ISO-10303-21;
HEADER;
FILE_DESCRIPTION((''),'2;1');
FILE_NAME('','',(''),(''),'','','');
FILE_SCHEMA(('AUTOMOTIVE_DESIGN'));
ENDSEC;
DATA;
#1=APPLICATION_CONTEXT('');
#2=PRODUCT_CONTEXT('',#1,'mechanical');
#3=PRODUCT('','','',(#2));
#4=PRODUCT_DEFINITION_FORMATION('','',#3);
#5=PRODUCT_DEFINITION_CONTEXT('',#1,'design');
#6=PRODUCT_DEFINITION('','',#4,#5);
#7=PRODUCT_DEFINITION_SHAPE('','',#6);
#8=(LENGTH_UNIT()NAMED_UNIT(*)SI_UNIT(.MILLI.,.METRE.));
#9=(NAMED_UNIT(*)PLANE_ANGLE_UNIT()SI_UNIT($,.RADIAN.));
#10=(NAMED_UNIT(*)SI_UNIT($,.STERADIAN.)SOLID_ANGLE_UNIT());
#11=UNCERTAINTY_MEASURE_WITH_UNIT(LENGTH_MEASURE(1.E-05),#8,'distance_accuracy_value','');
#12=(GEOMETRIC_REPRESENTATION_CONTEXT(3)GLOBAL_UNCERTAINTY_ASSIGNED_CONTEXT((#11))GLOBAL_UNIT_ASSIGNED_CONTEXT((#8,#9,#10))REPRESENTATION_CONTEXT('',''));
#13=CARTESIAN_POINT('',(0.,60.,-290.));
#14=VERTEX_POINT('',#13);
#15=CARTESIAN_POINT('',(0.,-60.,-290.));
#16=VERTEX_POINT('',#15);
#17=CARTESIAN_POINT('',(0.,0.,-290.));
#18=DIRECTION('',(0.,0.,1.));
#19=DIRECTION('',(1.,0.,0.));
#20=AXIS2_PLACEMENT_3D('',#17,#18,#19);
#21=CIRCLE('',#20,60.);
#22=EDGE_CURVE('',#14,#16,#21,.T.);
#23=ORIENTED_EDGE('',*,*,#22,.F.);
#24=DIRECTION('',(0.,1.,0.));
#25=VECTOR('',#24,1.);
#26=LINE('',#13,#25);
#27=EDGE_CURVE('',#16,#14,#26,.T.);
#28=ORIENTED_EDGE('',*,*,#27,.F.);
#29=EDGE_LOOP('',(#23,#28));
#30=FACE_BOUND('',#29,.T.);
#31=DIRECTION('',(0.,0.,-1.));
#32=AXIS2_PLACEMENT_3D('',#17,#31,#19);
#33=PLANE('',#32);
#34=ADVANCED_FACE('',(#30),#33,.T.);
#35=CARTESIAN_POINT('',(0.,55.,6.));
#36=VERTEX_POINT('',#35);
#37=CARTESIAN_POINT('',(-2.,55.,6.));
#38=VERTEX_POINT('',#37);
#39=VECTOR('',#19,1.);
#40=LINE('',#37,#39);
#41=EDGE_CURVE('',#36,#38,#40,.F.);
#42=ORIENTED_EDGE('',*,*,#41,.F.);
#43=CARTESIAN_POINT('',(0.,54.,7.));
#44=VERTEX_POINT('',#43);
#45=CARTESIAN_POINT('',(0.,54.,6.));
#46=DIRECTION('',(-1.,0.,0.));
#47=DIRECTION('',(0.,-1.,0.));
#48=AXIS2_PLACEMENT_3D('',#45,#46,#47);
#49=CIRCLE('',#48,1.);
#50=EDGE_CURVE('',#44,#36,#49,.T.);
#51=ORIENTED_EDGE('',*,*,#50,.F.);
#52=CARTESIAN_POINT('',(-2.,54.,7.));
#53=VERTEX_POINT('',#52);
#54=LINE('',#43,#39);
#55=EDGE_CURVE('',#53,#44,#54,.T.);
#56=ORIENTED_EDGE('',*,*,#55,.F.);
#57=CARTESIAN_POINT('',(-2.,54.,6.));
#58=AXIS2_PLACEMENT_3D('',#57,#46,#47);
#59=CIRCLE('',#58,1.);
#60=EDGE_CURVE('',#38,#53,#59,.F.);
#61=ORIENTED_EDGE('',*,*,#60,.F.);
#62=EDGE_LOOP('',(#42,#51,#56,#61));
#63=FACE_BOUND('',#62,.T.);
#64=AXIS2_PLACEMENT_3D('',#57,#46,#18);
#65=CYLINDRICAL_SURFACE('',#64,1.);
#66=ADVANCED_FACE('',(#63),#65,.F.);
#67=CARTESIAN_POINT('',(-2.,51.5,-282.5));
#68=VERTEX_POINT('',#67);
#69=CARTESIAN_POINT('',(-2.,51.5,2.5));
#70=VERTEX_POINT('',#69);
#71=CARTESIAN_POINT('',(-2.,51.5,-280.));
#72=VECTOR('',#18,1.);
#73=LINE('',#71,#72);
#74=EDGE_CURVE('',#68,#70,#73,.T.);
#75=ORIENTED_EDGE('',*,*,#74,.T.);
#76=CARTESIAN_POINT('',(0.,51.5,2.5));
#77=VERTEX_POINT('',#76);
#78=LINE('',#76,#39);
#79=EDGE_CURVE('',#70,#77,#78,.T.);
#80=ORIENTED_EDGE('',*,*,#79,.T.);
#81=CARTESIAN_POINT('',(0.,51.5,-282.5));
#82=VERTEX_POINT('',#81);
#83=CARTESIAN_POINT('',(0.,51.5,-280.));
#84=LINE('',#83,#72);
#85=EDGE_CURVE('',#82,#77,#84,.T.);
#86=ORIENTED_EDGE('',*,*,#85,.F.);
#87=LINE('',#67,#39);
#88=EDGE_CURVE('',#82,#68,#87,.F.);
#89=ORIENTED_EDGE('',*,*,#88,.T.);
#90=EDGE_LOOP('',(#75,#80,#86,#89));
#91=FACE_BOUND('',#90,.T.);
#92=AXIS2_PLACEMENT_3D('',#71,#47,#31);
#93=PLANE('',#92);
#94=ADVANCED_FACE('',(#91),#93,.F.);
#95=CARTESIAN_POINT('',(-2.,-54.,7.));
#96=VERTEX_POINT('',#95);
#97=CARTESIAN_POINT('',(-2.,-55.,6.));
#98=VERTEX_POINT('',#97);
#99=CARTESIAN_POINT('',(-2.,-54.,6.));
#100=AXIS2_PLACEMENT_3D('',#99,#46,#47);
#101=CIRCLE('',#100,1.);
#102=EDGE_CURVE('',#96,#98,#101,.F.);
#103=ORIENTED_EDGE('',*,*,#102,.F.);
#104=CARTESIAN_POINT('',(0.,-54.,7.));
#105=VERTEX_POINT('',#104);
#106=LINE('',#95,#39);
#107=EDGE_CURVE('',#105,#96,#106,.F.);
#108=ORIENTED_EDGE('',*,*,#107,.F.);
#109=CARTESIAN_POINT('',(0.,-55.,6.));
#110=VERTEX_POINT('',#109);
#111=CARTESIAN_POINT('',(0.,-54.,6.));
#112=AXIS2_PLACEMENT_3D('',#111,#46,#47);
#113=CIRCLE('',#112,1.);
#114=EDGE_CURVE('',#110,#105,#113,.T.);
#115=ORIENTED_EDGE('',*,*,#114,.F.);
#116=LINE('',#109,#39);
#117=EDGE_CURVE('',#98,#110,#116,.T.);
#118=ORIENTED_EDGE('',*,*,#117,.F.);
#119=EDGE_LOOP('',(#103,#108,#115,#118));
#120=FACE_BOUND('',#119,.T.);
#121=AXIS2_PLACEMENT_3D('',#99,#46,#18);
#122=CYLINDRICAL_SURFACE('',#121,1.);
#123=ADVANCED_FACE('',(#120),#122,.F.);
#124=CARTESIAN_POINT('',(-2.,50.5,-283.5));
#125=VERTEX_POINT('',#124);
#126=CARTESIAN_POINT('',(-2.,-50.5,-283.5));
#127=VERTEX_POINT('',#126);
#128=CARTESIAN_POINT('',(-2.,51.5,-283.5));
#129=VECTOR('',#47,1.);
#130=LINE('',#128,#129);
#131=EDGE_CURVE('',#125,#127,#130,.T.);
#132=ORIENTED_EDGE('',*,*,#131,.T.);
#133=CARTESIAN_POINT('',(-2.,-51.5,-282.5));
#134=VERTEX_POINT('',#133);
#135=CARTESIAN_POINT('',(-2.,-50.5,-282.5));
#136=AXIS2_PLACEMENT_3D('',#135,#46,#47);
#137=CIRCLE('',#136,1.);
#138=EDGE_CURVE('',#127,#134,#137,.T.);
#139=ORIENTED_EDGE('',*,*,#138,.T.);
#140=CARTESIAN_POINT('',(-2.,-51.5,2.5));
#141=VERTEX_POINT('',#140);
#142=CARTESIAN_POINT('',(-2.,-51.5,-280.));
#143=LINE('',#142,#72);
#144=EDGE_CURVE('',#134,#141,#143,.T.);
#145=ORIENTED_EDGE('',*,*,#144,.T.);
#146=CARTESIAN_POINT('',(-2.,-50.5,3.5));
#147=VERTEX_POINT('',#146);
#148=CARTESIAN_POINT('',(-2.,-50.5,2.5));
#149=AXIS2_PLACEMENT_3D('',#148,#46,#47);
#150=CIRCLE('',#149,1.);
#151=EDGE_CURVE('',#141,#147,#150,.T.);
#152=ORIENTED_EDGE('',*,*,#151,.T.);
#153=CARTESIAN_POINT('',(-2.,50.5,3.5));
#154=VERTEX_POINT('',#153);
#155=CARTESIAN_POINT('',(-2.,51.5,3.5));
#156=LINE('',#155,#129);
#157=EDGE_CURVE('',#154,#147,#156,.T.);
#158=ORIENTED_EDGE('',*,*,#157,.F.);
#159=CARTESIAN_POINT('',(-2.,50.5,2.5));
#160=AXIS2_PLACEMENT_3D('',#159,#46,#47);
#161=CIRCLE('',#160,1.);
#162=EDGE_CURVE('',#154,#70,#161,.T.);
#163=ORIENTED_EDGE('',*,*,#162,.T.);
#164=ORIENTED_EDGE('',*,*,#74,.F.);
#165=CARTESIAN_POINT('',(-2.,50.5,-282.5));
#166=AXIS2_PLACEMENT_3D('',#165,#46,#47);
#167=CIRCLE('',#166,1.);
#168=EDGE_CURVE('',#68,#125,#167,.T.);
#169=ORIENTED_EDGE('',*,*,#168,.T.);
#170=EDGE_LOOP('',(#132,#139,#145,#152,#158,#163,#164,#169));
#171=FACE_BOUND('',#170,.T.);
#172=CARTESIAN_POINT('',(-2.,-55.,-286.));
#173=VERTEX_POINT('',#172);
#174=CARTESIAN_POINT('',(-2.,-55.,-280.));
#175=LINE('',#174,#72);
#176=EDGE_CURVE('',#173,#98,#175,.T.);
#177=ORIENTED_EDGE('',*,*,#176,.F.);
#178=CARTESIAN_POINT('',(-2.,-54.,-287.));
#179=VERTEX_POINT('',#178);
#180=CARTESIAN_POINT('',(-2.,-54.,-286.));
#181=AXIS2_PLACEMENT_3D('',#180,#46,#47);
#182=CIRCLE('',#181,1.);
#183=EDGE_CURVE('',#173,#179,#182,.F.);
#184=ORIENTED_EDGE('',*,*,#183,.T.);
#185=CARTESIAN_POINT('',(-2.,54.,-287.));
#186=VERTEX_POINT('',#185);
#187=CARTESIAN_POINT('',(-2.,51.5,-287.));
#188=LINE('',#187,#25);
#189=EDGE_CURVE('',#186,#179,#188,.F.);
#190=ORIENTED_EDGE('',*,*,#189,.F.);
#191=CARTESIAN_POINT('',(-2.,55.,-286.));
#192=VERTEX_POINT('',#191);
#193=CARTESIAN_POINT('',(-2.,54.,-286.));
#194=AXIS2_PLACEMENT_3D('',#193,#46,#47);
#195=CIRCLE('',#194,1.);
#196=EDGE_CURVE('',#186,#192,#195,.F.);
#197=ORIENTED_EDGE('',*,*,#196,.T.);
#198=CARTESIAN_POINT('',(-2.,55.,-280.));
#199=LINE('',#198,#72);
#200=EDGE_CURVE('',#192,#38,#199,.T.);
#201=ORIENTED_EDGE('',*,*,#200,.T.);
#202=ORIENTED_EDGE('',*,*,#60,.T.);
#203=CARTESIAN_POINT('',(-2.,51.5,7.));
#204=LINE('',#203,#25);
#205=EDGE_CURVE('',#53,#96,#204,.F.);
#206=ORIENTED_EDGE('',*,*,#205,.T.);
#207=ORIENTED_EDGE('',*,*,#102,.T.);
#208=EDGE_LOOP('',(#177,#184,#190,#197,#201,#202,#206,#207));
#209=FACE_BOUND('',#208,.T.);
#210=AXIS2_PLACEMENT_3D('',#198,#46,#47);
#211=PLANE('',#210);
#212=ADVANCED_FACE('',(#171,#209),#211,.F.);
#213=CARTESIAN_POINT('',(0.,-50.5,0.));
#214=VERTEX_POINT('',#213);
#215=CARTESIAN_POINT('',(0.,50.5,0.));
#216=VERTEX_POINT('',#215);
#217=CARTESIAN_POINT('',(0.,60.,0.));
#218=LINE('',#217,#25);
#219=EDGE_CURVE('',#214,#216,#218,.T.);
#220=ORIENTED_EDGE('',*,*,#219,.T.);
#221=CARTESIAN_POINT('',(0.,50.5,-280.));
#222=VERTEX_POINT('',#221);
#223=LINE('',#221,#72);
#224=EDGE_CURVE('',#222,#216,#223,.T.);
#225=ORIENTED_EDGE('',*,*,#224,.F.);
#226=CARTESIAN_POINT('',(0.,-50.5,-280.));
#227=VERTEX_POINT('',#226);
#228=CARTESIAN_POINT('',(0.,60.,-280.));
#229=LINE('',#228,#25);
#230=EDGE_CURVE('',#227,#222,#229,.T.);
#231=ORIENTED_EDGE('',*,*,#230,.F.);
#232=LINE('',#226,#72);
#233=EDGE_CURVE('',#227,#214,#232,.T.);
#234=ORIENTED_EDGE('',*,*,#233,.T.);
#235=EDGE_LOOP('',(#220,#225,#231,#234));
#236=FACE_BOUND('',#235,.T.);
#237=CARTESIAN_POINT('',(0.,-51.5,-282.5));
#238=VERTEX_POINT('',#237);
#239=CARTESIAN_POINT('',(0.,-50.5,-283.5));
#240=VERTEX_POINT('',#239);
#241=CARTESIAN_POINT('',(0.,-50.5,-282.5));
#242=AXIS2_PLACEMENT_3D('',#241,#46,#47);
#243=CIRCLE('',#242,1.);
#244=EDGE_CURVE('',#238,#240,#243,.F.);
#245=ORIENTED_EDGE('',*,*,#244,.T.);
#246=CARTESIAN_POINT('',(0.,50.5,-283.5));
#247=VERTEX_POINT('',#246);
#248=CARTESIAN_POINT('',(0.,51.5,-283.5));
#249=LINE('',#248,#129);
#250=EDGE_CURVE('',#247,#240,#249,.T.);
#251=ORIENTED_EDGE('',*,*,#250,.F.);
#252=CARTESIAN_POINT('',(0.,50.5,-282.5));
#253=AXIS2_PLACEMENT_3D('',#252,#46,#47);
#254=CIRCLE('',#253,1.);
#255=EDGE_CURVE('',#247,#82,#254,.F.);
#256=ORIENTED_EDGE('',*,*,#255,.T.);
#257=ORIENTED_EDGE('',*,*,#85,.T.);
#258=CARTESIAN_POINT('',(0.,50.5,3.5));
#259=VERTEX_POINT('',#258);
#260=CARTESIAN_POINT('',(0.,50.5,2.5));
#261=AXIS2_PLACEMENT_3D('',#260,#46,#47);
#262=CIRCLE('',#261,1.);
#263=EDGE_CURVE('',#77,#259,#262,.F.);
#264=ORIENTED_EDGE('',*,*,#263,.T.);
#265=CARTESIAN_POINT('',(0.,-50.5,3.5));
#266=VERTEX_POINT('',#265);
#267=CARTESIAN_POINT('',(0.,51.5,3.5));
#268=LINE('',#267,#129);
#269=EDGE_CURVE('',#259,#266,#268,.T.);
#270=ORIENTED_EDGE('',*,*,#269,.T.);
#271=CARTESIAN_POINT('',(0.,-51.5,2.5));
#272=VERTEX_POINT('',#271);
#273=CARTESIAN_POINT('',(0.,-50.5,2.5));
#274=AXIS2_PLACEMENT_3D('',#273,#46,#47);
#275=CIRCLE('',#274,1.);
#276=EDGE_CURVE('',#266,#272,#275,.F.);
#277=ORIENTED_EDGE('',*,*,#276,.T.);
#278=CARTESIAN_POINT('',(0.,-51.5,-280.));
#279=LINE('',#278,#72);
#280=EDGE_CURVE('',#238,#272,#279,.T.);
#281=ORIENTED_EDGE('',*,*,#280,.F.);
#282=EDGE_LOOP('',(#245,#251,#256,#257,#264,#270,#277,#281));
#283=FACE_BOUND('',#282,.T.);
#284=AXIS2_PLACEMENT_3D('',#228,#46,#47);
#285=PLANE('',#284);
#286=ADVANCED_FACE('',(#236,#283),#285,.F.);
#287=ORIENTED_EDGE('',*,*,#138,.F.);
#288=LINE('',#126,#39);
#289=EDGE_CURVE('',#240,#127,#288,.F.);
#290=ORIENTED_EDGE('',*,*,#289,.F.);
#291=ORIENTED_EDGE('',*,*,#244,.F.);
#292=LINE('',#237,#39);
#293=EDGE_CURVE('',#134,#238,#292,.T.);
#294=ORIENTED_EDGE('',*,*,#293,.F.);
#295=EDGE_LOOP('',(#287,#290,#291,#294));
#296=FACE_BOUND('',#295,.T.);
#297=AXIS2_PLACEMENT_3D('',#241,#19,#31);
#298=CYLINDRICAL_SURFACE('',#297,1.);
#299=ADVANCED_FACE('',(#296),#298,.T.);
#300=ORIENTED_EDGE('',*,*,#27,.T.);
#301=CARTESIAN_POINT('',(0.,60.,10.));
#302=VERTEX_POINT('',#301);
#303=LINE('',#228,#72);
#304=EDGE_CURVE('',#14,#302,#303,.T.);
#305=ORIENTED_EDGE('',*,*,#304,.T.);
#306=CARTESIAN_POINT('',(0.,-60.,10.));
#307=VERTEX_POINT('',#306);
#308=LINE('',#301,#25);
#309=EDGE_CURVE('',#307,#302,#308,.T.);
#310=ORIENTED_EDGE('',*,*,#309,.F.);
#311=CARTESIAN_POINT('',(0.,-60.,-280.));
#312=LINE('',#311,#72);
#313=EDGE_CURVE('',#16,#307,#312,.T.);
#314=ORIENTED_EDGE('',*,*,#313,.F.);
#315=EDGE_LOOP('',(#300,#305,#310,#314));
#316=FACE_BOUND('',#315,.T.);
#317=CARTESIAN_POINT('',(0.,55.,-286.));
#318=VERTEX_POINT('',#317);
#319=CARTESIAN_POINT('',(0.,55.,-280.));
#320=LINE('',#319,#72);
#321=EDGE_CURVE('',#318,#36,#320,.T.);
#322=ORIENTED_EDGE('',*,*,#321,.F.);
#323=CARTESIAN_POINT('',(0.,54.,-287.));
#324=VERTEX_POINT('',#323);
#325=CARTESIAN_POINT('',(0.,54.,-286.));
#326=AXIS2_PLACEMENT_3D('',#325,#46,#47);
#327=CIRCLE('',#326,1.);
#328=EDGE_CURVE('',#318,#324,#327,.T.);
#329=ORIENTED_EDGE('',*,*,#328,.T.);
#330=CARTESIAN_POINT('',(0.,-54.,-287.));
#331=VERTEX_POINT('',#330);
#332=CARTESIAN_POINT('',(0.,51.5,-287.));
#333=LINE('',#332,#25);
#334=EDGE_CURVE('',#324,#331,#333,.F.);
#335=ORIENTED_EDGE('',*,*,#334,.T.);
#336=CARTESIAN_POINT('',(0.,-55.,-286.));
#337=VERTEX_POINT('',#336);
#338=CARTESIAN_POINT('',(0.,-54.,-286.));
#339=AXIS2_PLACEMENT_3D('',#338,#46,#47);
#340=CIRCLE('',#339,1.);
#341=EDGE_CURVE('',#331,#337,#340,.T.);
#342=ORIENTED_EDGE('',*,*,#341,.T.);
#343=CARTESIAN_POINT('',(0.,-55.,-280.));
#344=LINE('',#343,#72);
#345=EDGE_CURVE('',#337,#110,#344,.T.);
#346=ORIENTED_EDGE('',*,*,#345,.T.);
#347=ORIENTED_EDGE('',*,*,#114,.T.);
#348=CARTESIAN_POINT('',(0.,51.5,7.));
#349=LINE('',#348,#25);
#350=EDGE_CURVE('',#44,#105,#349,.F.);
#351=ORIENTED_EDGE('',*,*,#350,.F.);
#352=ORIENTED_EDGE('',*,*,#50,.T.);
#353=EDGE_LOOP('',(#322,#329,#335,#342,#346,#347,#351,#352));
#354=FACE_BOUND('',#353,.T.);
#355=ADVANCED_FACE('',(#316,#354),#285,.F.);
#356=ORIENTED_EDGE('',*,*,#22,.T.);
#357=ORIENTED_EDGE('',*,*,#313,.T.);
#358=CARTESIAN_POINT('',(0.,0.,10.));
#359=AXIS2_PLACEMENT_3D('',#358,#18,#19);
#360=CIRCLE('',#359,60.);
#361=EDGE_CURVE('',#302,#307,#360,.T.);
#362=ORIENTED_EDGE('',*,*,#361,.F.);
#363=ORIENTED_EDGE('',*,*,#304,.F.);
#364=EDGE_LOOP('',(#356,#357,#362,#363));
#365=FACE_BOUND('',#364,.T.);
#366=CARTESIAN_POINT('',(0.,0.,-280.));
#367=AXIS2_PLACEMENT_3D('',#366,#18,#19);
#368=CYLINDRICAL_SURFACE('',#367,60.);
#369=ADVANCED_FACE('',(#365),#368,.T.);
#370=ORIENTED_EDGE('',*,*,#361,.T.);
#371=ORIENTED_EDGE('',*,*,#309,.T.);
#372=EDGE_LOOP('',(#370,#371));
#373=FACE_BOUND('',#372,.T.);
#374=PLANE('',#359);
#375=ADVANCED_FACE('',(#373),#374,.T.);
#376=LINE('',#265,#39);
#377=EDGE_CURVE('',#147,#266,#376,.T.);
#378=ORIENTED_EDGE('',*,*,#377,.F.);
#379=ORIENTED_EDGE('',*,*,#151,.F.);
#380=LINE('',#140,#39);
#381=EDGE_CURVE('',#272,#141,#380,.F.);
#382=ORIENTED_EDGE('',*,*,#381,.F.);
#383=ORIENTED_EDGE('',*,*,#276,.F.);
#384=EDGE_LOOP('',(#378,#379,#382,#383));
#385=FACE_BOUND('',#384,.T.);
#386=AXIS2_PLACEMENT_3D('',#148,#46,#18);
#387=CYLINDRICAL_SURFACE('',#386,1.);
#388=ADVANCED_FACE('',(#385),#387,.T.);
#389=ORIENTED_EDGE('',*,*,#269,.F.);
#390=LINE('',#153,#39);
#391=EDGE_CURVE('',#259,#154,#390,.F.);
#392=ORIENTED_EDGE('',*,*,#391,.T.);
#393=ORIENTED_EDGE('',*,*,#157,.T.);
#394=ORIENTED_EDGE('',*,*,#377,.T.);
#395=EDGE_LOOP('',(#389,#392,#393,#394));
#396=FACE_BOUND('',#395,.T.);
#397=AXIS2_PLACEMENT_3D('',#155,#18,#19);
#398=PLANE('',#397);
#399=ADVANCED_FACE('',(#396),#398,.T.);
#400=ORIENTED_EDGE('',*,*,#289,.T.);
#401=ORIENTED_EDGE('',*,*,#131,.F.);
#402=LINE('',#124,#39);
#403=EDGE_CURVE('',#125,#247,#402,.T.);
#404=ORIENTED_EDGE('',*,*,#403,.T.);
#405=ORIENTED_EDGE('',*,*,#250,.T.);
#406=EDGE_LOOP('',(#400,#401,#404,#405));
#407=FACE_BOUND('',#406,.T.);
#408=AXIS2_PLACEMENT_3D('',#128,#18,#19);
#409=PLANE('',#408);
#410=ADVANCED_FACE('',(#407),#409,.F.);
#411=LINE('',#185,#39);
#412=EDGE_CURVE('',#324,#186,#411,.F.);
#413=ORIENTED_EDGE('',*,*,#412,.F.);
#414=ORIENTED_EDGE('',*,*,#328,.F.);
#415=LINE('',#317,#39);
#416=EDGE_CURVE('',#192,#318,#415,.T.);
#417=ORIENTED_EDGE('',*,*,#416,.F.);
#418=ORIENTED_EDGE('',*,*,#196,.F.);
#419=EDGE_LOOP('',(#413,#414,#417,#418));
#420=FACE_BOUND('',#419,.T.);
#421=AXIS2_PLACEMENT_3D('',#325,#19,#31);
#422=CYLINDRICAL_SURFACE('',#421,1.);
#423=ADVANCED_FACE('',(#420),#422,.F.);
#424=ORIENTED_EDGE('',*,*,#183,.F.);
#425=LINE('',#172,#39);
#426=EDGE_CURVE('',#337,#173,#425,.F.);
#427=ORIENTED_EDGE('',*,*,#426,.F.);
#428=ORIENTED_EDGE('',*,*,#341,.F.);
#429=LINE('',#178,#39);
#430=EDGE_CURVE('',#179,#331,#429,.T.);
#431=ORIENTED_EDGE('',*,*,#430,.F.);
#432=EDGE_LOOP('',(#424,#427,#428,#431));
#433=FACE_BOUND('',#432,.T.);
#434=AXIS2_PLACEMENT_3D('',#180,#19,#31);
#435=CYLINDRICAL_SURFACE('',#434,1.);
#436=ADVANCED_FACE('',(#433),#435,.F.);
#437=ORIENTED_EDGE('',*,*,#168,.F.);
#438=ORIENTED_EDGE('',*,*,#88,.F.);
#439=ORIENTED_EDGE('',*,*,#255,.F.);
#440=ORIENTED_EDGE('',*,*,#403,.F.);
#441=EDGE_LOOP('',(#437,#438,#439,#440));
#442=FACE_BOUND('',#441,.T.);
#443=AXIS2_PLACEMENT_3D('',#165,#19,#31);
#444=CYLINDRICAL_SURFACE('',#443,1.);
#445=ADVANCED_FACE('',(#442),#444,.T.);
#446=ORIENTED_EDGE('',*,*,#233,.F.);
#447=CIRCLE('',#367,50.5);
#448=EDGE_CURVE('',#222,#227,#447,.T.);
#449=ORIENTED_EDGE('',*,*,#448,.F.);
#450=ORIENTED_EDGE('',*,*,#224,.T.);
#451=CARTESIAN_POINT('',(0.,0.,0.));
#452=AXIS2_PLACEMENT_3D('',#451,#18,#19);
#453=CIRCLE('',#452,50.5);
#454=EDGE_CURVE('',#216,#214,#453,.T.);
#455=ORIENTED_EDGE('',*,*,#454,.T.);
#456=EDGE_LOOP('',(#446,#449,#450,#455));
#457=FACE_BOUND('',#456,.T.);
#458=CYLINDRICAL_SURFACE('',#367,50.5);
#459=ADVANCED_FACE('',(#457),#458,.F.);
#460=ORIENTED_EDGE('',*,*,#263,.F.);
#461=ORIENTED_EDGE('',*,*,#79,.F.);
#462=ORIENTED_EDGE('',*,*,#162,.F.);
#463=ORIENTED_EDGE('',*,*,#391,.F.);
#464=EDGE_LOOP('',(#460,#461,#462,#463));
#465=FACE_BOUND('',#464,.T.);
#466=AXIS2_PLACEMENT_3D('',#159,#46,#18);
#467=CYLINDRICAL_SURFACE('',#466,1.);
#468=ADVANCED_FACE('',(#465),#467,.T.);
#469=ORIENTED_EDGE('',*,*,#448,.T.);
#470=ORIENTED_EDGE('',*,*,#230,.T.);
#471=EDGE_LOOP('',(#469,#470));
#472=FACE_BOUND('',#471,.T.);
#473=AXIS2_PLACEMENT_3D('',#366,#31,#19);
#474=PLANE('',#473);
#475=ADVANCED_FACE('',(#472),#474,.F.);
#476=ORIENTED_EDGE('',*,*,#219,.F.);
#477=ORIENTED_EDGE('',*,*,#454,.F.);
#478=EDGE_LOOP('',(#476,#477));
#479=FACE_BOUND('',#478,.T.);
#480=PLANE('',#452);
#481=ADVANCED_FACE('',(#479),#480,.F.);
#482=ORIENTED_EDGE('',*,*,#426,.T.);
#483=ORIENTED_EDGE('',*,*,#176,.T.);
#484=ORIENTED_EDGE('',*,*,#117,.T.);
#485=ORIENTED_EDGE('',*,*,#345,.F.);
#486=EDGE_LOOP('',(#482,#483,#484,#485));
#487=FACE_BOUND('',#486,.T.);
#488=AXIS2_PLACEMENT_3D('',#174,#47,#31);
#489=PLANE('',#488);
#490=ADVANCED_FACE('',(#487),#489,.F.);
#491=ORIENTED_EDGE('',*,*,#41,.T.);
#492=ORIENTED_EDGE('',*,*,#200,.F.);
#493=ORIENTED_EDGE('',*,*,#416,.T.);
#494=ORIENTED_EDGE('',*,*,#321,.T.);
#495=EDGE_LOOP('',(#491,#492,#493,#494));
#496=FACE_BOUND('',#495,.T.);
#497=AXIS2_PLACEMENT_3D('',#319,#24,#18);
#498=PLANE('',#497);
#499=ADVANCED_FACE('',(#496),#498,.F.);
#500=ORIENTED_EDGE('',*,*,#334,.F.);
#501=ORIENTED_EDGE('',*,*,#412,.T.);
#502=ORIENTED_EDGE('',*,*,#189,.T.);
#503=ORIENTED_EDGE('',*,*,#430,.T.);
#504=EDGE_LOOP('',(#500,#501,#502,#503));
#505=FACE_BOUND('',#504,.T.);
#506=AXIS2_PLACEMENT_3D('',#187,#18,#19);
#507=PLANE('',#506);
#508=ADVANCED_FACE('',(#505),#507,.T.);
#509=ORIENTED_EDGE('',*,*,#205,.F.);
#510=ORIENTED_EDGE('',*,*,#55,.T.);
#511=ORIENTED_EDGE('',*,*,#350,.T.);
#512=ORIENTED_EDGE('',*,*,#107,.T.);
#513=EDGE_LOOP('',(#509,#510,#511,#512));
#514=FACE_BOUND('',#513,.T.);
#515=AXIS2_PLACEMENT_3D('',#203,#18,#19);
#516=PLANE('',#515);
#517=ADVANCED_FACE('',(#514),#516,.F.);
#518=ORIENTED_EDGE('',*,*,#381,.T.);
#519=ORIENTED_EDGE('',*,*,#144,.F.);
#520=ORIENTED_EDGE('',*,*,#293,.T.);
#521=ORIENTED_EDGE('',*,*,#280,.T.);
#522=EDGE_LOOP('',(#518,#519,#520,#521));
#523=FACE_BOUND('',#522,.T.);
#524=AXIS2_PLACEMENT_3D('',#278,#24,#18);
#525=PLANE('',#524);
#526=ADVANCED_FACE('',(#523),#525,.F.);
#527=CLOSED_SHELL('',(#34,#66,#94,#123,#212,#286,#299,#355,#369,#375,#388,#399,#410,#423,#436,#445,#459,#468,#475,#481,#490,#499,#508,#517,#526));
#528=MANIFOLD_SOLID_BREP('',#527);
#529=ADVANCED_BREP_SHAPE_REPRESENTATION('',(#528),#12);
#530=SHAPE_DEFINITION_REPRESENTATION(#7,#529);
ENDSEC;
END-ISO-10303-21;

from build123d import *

# Parameters (mm, degrees)
BOSS_EXTRUDE1_DEPTH     = 280
BOSS_EXTRUDE3_START     = 10
BOSS_EXTRUDE3_DEPTH     = 10
CUT_EXTRUDE_THIN1_START = -2
CUT_EXTRUDE_THIN1_DEPTH = 2
FILLET6_R               = 1


# Read off the part's stored shape, not the designer's step: Cut-Extrude-Thin1
with BuildPart() as part:
    # Sketch1 → Boss-Extrude1 (new body)
    with BuildSketch(Plane.XY):
        with BuildLine():
            Line((0, 55), (-2, 55))
            Line((-2, 55), (-2, 51.5))
            Line((-2, 51.5), (0, 51.5))
            Line((0, 51.5), (0, 50.5))
            ThreePointArc((0, 50.5), (-50.5, 0), (0, -50.5))
            Line((0, -50.5), (0, -51.5))
            Line((0, -51.5), (-2, -51.5))
            Line((-2, -51.5), (-2, -55))
            Line((-2, -55), (0, -55))
            Line((0, -55), (0, -60))
            ThreePointArc((0, -60), (-60, 0), (0, 60))
            Line((0, 60), (0, 55))
        make_face()
    extrude(amount=-BOSS_EXTRUDE1_DEPTH)

    # Sketch7 → Boss-Extrude3 (add)
    with BuildSketch(Plane.XY.offset(BOSS_EXTRUDE3_START)):
        with BuildLine():
            Line((0, 60), (0, -60))
            ThreePointArc((0, -60), (-60, 0), (0, 60))
        make_face()
    boss_extrude3 = extrude(amount=-BOSS_EXTRUDE3_DEPTH)

    # Mirror1: Boss-Extrude3 across plane
    add(boss_extrude3.mirror(Plane.XY.offset(-140)))

    # Cut-Extrude-Thin1 outline → Cut-Extrude-Thin1 (cut)
    with BuildSketch(Plane(origin=(0, 0, 0), x_dir=(0, 0, -1), z_dir=(1, 0, 0)).offset(CUT_EXTRUDE_THIN1_START)):
        Polygon((0, 55), (-7, 55), (-7, -55), (0, -55), (0, -51.5), (-3.5, -51.5), (-3.5, 51.5), (0, 51.5), align=None)
    cut_extrude_thin1 = extrude(amount=CUT_EXTRUDE_THIN1_DEPTH, mode=Mode.SUBTRACT)

    # Mirror2: Cut-Extrude-Thin1 across plane
    add(cut_extrude_thin1.mirror(Plane.XY.offset(-140)), mode=Mode.SUBTRACT)

    # Fillet6
    fillet6_edges = [part.edges().sort_by_distance(p)[0] for p in [
        (-1, -55, 7),
        (-1, 55, 7),
        (-1, 51.5, 3.5),
        (-1, -51.5, 3.5),
        (-1, -55, -287),
        (-1, -51.5, -283.5),
        (-1, 51.5, -283.5),
        (-1, 55, -287),
    ]]
    fillet(fillet6_edges, radius=FILLET6_R)


solid = part.part
